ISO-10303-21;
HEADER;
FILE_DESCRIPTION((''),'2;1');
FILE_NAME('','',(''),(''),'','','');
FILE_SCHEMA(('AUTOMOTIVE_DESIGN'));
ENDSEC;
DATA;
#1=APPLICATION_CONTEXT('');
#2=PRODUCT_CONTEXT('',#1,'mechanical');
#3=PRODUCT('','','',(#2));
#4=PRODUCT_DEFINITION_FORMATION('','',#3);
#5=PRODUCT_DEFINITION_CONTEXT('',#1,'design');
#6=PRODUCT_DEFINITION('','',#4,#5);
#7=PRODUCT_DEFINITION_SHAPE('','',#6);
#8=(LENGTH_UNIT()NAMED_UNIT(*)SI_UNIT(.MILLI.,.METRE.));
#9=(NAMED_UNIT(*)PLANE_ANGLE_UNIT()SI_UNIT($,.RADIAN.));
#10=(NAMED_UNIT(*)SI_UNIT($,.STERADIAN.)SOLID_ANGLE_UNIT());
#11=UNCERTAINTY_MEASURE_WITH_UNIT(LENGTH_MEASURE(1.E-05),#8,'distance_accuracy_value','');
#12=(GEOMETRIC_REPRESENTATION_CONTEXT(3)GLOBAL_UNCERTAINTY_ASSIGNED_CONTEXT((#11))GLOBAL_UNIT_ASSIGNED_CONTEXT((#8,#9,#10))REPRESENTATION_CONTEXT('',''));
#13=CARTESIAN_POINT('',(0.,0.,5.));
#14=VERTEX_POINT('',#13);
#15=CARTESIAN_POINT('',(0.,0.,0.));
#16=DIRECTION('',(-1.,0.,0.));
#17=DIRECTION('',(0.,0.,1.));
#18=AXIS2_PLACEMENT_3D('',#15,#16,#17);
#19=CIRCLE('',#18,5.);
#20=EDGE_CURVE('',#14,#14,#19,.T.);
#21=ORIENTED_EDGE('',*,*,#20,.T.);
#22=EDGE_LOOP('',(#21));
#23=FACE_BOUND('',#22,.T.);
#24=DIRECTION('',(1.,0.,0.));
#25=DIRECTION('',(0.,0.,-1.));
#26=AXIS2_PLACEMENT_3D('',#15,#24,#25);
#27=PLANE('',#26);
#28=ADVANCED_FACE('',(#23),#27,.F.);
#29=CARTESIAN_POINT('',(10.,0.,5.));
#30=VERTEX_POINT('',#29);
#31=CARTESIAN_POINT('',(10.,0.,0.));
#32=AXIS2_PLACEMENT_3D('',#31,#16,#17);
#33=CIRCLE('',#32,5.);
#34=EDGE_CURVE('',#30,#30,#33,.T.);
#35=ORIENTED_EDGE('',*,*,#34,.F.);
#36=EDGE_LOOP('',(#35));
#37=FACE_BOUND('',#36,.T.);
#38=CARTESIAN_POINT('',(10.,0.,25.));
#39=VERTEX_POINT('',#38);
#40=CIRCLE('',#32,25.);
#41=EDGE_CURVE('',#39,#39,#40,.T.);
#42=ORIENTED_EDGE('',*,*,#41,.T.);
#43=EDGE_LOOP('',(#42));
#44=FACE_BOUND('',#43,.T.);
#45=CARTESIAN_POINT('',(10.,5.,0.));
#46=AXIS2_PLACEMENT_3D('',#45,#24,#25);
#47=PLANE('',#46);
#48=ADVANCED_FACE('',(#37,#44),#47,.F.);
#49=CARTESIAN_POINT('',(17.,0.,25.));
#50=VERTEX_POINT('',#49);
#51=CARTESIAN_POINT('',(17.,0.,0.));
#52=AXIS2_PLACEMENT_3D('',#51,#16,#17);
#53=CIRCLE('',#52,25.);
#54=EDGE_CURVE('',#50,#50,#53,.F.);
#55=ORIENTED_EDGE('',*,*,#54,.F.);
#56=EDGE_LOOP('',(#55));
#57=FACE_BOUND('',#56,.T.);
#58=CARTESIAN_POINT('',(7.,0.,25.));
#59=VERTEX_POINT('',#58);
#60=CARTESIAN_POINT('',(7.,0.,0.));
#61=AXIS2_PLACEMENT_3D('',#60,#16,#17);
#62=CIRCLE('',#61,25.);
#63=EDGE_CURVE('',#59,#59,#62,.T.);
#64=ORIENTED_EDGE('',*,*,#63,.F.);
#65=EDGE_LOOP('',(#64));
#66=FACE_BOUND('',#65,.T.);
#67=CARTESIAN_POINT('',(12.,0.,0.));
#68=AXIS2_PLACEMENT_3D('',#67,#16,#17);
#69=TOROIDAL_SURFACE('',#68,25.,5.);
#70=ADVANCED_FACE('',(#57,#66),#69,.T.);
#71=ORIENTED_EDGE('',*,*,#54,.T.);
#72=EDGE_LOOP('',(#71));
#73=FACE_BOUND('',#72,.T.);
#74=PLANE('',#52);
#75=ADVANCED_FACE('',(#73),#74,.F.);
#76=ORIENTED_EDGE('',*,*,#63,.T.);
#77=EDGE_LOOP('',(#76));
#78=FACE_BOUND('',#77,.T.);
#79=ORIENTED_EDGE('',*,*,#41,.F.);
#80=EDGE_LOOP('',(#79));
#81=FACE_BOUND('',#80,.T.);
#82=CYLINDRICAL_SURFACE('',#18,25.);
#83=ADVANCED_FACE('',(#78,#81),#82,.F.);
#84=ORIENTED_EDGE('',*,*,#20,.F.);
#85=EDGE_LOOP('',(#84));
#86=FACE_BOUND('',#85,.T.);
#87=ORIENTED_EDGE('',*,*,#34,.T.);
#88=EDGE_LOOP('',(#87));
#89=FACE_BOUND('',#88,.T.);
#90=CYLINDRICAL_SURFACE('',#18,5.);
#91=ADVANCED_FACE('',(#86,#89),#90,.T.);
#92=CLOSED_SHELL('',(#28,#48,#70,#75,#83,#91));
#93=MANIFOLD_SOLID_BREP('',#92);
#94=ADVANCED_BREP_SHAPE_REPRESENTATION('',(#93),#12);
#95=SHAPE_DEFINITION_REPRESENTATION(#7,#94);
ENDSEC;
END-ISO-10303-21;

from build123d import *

# Parameters (mm, degrees)
FILLET1_R = 5


with BuildPart() as part:
    # Sketch1 → Revolve2 (revolve)
    with BuildSketch(Plane.XY, mode=Mode.PRIVATE) as revolve2_sk:
        Polygon((0, 0), (0, 5), (10, 5), (10, 25), (7, 25), (7, 30), (17, 30), (17, 0), align=None)
    revolve(revolve2_sk.sketch.rotate(Axis((0, 0, 0), (1, 0, 0)), 90), axis=Axis((0, 0, 0), (1, 0, 0)))

    # Fillet1
    fillet1_edges = [part.edges().sort_by_distance(p)[0] for p in [
        (7, 0, -30),
        (17, 0, -30),
    ]]
    fillet(fillet1_edges, radius=FILLET1_R - 0.0001)  # a hair under: the kernel refuses the full size


solid = part.part
